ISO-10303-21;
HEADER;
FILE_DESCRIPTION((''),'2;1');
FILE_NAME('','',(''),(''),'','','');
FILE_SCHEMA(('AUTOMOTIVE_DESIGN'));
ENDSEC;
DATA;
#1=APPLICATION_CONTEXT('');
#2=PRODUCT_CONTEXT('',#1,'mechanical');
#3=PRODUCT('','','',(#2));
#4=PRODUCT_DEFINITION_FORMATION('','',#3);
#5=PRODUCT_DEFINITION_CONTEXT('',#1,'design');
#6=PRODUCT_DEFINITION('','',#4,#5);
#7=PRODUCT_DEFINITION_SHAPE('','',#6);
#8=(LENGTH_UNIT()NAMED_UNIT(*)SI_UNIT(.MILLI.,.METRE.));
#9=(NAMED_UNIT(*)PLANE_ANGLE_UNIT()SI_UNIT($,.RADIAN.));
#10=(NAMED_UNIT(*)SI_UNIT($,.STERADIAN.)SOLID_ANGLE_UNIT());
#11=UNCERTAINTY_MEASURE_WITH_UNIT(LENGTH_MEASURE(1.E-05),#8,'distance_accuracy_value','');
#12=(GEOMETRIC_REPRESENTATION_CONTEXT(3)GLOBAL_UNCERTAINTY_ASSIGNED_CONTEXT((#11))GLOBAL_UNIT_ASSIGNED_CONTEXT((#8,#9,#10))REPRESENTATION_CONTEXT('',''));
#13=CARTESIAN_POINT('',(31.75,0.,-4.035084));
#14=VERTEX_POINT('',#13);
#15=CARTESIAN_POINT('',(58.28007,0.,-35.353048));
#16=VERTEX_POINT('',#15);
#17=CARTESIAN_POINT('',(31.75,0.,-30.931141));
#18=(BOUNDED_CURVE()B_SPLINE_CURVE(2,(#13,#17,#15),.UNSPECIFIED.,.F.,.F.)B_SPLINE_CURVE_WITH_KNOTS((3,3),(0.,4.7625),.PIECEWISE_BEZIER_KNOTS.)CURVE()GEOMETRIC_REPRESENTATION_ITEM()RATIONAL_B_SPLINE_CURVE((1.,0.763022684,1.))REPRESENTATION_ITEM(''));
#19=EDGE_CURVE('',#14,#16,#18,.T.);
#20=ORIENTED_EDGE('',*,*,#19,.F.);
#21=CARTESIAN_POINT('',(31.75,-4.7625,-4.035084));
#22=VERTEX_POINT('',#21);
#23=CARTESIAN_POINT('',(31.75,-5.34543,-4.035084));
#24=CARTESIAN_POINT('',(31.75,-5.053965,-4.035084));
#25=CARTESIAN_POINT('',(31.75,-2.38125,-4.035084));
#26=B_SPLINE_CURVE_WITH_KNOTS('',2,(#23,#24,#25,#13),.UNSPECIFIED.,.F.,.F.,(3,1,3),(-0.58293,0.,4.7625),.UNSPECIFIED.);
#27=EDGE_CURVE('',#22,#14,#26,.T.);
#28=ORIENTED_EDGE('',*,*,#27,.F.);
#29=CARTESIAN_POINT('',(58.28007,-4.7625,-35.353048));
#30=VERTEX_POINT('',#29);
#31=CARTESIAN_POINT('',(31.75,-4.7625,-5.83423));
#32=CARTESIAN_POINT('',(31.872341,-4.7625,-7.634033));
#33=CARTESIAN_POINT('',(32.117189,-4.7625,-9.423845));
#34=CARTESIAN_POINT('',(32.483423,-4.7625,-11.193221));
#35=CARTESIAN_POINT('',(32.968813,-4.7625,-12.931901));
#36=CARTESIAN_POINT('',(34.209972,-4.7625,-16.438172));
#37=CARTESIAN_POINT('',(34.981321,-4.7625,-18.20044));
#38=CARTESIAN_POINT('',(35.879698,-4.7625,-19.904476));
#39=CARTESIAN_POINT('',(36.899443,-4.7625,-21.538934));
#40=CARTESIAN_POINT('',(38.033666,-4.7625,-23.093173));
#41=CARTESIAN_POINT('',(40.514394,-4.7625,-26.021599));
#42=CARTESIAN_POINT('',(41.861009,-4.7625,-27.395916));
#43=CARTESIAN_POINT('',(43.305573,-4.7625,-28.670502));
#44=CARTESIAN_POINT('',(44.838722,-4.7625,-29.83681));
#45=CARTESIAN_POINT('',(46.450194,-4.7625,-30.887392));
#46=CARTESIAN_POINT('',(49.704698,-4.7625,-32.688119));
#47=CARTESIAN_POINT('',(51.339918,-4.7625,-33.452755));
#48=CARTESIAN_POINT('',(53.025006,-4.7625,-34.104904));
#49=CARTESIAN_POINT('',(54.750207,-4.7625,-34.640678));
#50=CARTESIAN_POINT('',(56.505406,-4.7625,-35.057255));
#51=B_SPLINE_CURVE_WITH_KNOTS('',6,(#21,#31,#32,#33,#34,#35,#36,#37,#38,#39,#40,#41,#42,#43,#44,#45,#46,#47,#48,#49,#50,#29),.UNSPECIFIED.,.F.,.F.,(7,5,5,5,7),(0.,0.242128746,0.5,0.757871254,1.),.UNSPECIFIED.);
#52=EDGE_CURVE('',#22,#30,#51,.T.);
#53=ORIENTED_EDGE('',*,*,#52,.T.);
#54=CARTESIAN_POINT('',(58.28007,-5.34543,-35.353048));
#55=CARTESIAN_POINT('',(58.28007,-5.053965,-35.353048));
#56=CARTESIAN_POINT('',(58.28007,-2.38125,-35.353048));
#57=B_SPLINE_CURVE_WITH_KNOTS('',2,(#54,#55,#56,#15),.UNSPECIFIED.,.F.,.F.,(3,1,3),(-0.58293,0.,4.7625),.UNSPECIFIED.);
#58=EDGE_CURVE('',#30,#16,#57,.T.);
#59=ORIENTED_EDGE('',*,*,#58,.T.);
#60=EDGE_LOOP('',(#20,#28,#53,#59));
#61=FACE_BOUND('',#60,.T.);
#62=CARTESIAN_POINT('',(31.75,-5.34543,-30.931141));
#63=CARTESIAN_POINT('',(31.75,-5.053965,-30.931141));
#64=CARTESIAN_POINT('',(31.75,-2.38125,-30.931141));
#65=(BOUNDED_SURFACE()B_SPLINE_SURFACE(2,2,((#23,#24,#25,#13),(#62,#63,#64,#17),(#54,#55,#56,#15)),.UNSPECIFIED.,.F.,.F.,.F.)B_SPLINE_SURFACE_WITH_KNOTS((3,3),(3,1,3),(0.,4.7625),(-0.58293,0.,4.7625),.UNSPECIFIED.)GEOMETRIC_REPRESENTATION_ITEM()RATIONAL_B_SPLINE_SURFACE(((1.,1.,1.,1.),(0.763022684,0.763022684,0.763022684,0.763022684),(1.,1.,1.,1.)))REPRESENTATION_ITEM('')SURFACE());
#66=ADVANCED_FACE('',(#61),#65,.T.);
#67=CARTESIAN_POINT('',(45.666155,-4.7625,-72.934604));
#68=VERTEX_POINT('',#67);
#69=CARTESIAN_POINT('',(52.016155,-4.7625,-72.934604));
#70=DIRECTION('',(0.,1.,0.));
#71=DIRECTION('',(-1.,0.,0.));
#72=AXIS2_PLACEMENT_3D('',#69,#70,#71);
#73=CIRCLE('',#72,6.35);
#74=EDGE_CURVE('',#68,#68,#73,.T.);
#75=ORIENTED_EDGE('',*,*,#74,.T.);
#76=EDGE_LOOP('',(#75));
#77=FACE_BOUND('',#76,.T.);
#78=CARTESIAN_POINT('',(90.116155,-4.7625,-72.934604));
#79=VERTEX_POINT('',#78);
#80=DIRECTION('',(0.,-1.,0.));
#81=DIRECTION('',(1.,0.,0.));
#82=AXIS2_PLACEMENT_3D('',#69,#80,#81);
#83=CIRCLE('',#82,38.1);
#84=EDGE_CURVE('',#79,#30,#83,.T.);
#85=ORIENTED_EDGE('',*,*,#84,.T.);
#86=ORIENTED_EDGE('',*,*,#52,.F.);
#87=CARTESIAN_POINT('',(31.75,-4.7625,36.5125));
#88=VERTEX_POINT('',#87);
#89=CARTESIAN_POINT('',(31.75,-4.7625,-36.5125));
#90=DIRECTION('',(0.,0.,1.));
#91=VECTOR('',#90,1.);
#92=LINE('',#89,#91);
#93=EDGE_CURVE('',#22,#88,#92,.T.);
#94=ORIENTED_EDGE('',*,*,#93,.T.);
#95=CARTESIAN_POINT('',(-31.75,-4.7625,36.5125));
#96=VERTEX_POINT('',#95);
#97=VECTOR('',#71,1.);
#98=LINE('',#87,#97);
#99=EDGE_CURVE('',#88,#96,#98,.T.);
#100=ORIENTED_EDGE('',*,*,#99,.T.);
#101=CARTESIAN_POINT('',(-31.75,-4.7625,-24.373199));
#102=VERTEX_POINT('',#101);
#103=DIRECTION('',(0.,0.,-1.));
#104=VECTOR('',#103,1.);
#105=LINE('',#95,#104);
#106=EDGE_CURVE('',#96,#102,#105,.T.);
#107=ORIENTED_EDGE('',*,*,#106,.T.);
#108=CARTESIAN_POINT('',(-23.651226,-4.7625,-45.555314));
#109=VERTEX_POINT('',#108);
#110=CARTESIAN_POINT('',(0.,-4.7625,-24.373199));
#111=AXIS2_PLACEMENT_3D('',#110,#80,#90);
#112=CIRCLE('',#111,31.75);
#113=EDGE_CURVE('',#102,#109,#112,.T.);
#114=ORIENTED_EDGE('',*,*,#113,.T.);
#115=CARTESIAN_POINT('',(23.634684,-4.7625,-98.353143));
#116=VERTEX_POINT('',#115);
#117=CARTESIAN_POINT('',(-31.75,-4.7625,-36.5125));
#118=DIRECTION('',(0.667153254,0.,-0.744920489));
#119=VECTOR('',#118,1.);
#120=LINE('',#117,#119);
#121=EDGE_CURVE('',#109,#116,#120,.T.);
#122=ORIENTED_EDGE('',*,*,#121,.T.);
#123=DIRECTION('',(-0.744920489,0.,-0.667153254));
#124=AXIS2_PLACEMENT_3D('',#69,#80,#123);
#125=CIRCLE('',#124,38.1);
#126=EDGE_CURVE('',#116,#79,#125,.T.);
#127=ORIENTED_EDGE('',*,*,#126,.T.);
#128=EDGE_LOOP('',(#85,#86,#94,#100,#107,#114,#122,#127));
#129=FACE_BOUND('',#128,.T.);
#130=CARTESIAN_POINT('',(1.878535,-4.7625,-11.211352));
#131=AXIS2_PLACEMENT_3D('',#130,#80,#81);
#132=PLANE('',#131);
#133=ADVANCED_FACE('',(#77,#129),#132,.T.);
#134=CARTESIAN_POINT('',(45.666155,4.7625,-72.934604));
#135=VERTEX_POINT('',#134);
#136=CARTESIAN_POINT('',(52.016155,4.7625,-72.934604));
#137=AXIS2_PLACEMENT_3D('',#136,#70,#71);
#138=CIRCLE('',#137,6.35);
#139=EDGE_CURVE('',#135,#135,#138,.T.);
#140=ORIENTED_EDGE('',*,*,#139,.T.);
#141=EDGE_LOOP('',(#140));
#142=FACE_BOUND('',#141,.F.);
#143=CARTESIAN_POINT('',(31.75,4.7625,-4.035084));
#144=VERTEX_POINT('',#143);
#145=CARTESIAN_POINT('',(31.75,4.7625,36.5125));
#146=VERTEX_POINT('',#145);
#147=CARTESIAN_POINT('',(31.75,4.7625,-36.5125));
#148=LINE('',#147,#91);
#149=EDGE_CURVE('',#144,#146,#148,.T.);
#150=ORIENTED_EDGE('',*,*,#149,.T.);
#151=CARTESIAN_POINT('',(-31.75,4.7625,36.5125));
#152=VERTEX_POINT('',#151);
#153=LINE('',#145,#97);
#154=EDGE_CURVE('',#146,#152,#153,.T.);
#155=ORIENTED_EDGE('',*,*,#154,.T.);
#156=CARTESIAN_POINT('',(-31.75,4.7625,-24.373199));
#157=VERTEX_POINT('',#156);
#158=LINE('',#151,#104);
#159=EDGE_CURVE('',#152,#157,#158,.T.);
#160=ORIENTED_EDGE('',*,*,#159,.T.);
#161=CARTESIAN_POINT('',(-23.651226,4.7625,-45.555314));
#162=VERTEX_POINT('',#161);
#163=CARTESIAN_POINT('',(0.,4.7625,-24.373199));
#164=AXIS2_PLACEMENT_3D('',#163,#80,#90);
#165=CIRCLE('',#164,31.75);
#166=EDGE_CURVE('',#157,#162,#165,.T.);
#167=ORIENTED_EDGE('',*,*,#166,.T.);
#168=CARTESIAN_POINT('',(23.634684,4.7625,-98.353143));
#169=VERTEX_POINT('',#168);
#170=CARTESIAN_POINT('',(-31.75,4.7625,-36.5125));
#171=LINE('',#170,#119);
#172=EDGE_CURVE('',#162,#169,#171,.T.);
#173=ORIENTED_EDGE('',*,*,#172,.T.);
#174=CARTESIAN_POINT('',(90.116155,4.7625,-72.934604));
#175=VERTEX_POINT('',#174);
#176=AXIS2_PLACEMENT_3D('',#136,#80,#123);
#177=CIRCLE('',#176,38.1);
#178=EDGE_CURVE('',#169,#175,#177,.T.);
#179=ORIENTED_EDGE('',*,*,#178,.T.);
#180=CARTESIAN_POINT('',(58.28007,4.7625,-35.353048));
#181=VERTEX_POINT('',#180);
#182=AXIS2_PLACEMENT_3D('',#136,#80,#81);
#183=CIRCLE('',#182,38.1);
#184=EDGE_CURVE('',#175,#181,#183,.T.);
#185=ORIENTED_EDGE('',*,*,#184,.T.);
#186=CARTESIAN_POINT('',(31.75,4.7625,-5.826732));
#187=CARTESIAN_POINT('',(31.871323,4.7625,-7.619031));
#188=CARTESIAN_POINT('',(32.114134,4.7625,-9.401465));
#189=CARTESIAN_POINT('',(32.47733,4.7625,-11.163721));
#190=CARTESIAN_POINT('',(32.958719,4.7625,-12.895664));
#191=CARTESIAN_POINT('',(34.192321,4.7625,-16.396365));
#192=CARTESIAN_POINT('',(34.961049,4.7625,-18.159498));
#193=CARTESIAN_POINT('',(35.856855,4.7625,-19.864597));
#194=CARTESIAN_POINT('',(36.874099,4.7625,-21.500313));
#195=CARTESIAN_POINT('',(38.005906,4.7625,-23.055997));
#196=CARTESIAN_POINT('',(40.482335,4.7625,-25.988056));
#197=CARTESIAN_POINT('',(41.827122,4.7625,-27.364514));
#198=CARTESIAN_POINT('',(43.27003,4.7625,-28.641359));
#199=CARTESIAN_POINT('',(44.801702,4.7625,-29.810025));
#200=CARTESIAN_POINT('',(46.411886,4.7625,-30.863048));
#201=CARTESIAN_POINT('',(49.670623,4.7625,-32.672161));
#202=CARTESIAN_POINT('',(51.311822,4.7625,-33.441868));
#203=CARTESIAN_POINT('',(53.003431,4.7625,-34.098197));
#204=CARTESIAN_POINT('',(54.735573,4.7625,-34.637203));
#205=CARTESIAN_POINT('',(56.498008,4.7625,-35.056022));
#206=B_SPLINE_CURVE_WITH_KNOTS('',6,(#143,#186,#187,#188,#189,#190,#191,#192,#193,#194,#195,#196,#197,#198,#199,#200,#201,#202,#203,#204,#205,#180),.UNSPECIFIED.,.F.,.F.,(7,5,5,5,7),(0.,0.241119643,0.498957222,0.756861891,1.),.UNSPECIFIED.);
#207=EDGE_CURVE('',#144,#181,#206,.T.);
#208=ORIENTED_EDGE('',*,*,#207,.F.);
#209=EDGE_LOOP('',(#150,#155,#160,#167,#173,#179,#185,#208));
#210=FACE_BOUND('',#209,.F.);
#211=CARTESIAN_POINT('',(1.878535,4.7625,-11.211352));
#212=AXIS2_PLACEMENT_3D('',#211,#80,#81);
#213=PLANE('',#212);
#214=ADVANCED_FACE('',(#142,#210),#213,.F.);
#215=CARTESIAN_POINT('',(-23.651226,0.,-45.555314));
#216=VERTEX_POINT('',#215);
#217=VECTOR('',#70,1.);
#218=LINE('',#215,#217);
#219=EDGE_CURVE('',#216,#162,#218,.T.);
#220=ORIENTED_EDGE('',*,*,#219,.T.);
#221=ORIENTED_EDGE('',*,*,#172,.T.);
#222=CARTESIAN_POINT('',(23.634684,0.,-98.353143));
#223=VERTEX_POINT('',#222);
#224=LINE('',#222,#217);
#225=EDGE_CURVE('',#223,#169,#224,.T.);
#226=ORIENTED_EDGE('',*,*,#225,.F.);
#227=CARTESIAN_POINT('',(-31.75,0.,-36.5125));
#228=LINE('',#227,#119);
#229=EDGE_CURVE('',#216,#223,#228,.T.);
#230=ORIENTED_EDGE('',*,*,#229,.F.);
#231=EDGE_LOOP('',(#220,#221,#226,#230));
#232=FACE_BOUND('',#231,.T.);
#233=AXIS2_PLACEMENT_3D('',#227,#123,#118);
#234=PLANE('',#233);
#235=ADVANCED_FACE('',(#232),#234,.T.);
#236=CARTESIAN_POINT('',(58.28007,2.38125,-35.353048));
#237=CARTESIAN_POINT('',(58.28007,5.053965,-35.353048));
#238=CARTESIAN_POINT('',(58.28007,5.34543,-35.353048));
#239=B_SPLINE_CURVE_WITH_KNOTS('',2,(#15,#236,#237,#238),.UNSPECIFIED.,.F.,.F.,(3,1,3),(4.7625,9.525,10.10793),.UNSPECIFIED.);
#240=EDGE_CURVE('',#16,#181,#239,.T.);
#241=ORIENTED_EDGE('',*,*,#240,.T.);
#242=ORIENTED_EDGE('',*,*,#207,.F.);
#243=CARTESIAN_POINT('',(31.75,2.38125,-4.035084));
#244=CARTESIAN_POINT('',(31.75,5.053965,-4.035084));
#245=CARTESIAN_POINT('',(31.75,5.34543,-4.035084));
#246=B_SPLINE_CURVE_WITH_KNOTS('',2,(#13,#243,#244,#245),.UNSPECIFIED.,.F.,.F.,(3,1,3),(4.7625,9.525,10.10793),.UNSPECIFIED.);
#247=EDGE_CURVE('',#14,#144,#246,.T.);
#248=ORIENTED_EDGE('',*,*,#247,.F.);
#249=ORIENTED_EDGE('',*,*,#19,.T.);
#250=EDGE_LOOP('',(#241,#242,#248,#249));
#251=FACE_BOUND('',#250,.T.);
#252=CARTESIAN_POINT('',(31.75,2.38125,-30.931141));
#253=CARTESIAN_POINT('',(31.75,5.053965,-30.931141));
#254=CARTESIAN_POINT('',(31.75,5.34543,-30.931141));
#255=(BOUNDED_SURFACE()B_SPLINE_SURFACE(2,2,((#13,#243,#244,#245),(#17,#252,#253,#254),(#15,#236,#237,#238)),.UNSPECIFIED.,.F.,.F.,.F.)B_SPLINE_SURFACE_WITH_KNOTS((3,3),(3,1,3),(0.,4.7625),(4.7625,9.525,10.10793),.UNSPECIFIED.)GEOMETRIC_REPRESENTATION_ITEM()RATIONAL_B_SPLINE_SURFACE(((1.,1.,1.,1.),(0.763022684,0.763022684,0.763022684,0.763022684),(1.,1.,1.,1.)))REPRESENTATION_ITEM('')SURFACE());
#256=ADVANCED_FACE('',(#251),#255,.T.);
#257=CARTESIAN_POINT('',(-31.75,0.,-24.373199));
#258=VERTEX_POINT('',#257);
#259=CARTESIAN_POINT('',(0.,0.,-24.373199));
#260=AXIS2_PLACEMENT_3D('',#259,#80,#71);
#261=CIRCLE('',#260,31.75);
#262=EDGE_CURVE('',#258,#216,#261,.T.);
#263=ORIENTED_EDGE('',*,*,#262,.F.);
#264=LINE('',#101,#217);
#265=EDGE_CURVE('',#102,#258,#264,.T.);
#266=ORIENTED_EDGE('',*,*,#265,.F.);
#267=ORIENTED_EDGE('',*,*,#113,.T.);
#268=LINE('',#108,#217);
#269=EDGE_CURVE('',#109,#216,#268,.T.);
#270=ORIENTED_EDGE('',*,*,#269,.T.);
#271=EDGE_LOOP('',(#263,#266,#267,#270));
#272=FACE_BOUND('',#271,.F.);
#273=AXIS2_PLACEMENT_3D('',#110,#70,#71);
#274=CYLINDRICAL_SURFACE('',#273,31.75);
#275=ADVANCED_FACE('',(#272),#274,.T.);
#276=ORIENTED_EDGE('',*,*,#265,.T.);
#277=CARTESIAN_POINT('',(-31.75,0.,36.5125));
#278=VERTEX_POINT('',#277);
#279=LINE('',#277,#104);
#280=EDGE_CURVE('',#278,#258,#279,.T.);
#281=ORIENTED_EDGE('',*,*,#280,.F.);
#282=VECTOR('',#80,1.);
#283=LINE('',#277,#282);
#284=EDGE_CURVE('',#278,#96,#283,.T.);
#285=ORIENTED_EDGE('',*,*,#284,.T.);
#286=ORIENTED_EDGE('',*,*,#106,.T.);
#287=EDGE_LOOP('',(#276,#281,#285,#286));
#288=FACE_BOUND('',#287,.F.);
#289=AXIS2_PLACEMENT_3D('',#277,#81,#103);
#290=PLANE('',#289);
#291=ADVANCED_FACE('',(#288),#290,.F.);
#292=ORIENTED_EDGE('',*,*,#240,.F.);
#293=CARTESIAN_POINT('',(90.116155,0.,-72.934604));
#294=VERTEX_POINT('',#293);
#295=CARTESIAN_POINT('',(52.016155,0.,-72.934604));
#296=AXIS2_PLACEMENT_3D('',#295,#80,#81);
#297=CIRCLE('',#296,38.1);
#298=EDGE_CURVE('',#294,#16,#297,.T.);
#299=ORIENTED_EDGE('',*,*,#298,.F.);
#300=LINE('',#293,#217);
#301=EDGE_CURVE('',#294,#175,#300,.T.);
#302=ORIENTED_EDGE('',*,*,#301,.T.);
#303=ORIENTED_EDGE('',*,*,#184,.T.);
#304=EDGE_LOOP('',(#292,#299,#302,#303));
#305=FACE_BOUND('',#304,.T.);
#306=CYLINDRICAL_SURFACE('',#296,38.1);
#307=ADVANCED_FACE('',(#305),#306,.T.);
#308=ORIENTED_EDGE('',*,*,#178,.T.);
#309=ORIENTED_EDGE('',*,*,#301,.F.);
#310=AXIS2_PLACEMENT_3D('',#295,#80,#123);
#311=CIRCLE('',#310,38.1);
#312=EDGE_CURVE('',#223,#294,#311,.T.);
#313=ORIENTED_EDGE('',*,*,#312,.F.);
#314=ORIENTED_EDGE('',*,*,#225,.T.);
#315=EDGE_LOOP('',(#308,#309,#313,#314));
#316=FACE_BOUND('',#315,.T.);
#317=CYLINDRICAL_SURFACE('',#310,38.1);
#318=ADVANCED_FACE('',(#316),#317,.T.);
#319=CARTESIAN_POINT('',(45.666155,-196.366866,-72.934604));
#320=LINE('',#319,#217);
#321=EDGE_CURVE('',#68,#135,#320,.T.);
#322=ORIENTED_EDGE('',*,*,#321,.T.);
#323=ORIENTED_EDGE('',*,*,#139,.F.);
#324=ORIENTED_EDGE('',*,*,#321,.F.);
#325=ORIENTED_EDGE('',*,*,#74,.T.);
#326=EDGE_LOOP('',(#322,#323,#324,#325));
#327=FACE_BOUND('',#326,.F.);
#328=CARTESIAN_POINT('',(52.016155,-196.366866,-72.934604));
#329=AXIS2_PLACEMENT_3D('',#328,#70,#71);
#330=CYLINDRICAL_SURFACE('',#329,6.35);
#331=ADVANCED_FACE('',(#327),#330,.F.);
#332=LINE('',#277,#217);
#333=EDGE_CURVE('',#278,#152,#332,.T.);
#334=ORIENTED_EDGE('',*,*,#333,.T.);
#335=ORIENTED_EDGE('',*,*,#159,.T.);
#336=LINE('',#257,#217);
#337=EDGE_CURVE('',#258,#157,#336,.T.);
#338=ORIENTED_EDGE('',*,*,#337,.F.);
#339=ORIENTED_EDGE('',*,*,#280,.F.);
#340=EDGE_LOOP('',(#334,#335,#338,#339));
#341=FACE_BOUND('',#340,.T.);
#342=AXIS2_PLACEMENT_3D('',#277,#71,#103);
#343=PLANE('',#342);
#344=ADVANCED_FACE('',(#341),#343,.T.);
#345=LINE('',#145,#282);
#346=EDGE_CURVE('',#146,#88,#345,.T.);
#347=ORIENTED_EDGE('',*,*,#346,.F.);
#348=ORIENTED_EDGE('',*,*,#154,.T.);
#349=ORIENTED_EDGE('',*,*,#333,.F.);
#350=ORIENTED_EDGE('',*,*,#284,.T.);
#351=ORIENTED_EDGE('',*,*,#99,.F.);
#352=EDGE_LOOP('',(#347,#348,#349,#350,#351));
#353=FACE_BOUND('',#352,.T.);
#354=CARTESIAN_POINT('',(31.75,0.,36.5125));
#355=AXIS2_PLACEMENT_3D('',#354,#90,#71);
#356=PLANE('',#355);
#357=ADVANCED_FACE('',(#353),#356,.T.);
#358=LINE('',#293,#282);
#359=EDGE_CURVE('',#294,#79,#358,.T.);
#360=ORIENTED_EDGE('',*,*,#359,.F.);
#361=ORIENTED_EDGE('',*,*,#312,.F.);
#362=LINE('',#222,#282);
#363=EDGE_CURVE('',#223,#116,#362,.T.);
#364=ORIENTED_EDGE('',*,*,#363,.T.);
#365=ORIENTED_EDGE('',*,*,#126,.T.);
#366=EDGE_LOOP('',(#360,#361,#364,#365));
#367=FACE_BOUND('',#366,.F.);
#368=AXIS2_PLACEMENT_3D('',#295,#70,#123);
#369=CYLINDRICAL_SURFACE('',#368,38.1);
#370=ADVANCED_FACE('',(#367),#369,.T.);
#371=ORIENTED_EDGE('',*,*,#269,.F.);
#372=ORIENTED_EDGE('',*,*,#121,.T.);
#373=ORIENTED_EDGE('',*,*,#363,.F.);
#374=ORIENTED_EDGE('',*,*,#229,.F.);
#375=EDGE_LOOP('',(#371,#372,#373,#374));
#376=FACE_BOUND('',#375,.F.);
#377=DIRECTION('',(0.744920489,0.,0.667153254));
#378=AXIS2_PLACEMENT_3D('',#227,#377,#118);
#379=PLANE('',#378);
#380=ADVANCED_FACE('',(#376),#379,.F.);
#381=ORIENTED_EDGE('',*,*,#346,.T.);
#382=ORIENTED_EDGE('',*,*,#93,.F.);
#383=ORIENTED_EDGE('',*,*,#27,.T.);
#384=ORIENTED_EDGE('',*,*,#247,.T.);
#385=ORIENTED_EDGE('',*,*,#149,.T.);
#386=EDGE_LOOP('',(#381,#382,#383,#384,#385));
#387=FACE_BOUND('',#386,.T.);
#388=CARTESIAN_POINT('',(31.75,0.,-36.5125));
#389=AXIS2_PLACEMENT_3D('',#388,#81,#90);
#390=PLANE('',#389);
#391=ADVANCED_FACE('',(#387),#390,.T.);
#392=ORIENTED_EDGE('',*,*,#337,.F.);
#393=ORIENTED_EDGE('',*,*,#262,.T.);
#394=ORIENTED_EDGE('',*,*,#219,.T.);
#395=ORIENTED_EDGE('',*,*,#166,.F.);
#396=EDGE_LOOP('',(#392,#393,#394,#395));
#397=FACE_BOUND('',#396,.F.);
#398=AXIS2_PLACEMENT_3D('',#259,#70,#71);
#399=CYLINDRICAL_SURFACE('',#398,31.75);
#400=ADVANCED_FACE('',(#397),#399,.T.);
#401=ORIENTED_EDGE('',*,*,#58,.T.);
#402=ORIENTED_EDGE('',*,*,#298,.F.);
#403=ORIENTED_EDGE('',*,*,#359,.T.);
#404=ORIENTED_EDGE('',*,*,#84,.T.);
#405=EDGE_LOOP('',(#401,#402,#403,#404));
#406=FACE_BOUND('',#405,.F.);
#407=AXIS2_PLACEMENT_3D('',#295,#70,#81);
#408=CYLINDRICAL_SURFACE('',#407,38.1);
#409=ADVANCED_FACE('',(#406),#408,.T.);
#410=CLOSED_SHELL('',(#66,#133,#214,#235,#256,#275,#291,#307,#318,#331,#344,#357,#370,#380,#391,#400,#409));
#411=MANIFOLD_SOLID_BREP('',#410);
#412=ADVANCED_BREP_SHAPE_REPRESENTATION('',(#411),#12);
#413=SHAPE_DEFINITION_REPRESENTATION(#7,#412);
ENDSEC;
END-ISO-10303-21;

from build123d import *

# Parameters (mm, degrees)
F1_DEPTH = 4.7625
F3_D     = 12.7
F4_R     = 31.75


# Not quite as in the source:
# - a length typed as a fraction of an inch, garbled in the dataset ("3 / 203.2 mm" for 3/8 in), is restored


with BuildPart() as f1:
    # F0 (on Front) → F1 (new body, symmetric)
    with BuildSketch(Plane.XZ):
        with BuildLine():
            Line((31.75, -36.5125), (31.75, 36.5125))
            Line((31.75, 36.5125), (-31.75, 36.5125))
            Line((-31.75, 36.5125), (-31.75, -36.5125))
            Line((-31.75, -36.5125), (13.9433553622, -74.3740279097))
            ThreePointArc((13.9433553622, -74.3740279097), (19.5317526148, -53.0254697777), (36.0181289039, -38.3560964092))
            Line((36.0181289039, -38.3560964092), (31.75, -36.5125))
        make_face()
        with BuildLine():
            Line((62.0881194933, -49.616895256), (36.0181289039, -38.3560964092))
            ThreePointArc((36.0181289039, -38.3560964092), (19.5317526148, -53.0254697777), (13.9433553622, -74.3740279097))
            Line((13.9433553622, -74.3740279097), (35.8101662485, -92.4928739454))
            ThreePointArc((35.8101662485, -92.4928739454), (73.672422944, -86.207359662), (62.0881194933, -49.616895256))
        make_face()
        with BuildLine():
            ThreePointArc((48.5832224491, -34.9895780081), (42.1559369458, -36.1326186582), (36.0181289039, -38.3560964092))
            Line((36.0181289039, -38.3560964092), (62.0881194933, -49.616895256))
            ThreePointArc((62.0881194933, -49.616895256), (73.672422944, -86.207359662), (35.8101662485, -92.4928739454))
            Line((35.8101662485, -92.4928739454), (13.9433553622, -74.3740279097))
            ThreePointArc((13.9433553622, -74.3740279097), (16.6920555351, -87.2110882282), (23.6346841746, -98.3531426993))
            ThreePointArc((23.6346841746, -98.3531426993), (65.6226967812, -108.5221298326), (90.1161548124, -72.9346037083))
            ThreePointArc((90.1161548124, -72.9346037083), (77.7145523982, -44.8062841439), (48.5832224491, -34.9895780081))
        make_face()
        with BuildLine():
            Line((13.9433553622, -74.3740279097), (-31.75, -36.5125))
            Line((-31.75, -36.5125), (23.6346841746, -98.3531426993))
            ThreePointArc((23.6346841746, -98.3531426993), (16.6920555351, -87.2110882282), (13.9433553622, -74.3740279097))
        make_face()
        with BuildLine():
            Line((48.5832224491, -34.9895780081), (31.75, -36.5125))
            Line((31.75, -36.5125), (36.0181289039, -38.3560964092))
            ThreePointArc((36.0181289039, -38.3560964092), (42.1559369458, -36.1326186582), (48.5832224491, -34.9895780081))
        make_face()
    extrude(amount=F1_DEPTH, both=True)

    # F3 (through all)
    with Locations(Plane.XZ.offset(4.7625)):
        with Locations((52.0161548124, -72.9346037083)):
            Hole(F3_D / 2)

    # F4
    f4_edges = [f1.edges().sort_by_distance(p)[0] for p in [
        (-31.75, 0, -36.5125),
        (31.75, 0, -36.5125),
    ]]
    fillet(f4_edges, radius=F4_R)


solid = f1.part
